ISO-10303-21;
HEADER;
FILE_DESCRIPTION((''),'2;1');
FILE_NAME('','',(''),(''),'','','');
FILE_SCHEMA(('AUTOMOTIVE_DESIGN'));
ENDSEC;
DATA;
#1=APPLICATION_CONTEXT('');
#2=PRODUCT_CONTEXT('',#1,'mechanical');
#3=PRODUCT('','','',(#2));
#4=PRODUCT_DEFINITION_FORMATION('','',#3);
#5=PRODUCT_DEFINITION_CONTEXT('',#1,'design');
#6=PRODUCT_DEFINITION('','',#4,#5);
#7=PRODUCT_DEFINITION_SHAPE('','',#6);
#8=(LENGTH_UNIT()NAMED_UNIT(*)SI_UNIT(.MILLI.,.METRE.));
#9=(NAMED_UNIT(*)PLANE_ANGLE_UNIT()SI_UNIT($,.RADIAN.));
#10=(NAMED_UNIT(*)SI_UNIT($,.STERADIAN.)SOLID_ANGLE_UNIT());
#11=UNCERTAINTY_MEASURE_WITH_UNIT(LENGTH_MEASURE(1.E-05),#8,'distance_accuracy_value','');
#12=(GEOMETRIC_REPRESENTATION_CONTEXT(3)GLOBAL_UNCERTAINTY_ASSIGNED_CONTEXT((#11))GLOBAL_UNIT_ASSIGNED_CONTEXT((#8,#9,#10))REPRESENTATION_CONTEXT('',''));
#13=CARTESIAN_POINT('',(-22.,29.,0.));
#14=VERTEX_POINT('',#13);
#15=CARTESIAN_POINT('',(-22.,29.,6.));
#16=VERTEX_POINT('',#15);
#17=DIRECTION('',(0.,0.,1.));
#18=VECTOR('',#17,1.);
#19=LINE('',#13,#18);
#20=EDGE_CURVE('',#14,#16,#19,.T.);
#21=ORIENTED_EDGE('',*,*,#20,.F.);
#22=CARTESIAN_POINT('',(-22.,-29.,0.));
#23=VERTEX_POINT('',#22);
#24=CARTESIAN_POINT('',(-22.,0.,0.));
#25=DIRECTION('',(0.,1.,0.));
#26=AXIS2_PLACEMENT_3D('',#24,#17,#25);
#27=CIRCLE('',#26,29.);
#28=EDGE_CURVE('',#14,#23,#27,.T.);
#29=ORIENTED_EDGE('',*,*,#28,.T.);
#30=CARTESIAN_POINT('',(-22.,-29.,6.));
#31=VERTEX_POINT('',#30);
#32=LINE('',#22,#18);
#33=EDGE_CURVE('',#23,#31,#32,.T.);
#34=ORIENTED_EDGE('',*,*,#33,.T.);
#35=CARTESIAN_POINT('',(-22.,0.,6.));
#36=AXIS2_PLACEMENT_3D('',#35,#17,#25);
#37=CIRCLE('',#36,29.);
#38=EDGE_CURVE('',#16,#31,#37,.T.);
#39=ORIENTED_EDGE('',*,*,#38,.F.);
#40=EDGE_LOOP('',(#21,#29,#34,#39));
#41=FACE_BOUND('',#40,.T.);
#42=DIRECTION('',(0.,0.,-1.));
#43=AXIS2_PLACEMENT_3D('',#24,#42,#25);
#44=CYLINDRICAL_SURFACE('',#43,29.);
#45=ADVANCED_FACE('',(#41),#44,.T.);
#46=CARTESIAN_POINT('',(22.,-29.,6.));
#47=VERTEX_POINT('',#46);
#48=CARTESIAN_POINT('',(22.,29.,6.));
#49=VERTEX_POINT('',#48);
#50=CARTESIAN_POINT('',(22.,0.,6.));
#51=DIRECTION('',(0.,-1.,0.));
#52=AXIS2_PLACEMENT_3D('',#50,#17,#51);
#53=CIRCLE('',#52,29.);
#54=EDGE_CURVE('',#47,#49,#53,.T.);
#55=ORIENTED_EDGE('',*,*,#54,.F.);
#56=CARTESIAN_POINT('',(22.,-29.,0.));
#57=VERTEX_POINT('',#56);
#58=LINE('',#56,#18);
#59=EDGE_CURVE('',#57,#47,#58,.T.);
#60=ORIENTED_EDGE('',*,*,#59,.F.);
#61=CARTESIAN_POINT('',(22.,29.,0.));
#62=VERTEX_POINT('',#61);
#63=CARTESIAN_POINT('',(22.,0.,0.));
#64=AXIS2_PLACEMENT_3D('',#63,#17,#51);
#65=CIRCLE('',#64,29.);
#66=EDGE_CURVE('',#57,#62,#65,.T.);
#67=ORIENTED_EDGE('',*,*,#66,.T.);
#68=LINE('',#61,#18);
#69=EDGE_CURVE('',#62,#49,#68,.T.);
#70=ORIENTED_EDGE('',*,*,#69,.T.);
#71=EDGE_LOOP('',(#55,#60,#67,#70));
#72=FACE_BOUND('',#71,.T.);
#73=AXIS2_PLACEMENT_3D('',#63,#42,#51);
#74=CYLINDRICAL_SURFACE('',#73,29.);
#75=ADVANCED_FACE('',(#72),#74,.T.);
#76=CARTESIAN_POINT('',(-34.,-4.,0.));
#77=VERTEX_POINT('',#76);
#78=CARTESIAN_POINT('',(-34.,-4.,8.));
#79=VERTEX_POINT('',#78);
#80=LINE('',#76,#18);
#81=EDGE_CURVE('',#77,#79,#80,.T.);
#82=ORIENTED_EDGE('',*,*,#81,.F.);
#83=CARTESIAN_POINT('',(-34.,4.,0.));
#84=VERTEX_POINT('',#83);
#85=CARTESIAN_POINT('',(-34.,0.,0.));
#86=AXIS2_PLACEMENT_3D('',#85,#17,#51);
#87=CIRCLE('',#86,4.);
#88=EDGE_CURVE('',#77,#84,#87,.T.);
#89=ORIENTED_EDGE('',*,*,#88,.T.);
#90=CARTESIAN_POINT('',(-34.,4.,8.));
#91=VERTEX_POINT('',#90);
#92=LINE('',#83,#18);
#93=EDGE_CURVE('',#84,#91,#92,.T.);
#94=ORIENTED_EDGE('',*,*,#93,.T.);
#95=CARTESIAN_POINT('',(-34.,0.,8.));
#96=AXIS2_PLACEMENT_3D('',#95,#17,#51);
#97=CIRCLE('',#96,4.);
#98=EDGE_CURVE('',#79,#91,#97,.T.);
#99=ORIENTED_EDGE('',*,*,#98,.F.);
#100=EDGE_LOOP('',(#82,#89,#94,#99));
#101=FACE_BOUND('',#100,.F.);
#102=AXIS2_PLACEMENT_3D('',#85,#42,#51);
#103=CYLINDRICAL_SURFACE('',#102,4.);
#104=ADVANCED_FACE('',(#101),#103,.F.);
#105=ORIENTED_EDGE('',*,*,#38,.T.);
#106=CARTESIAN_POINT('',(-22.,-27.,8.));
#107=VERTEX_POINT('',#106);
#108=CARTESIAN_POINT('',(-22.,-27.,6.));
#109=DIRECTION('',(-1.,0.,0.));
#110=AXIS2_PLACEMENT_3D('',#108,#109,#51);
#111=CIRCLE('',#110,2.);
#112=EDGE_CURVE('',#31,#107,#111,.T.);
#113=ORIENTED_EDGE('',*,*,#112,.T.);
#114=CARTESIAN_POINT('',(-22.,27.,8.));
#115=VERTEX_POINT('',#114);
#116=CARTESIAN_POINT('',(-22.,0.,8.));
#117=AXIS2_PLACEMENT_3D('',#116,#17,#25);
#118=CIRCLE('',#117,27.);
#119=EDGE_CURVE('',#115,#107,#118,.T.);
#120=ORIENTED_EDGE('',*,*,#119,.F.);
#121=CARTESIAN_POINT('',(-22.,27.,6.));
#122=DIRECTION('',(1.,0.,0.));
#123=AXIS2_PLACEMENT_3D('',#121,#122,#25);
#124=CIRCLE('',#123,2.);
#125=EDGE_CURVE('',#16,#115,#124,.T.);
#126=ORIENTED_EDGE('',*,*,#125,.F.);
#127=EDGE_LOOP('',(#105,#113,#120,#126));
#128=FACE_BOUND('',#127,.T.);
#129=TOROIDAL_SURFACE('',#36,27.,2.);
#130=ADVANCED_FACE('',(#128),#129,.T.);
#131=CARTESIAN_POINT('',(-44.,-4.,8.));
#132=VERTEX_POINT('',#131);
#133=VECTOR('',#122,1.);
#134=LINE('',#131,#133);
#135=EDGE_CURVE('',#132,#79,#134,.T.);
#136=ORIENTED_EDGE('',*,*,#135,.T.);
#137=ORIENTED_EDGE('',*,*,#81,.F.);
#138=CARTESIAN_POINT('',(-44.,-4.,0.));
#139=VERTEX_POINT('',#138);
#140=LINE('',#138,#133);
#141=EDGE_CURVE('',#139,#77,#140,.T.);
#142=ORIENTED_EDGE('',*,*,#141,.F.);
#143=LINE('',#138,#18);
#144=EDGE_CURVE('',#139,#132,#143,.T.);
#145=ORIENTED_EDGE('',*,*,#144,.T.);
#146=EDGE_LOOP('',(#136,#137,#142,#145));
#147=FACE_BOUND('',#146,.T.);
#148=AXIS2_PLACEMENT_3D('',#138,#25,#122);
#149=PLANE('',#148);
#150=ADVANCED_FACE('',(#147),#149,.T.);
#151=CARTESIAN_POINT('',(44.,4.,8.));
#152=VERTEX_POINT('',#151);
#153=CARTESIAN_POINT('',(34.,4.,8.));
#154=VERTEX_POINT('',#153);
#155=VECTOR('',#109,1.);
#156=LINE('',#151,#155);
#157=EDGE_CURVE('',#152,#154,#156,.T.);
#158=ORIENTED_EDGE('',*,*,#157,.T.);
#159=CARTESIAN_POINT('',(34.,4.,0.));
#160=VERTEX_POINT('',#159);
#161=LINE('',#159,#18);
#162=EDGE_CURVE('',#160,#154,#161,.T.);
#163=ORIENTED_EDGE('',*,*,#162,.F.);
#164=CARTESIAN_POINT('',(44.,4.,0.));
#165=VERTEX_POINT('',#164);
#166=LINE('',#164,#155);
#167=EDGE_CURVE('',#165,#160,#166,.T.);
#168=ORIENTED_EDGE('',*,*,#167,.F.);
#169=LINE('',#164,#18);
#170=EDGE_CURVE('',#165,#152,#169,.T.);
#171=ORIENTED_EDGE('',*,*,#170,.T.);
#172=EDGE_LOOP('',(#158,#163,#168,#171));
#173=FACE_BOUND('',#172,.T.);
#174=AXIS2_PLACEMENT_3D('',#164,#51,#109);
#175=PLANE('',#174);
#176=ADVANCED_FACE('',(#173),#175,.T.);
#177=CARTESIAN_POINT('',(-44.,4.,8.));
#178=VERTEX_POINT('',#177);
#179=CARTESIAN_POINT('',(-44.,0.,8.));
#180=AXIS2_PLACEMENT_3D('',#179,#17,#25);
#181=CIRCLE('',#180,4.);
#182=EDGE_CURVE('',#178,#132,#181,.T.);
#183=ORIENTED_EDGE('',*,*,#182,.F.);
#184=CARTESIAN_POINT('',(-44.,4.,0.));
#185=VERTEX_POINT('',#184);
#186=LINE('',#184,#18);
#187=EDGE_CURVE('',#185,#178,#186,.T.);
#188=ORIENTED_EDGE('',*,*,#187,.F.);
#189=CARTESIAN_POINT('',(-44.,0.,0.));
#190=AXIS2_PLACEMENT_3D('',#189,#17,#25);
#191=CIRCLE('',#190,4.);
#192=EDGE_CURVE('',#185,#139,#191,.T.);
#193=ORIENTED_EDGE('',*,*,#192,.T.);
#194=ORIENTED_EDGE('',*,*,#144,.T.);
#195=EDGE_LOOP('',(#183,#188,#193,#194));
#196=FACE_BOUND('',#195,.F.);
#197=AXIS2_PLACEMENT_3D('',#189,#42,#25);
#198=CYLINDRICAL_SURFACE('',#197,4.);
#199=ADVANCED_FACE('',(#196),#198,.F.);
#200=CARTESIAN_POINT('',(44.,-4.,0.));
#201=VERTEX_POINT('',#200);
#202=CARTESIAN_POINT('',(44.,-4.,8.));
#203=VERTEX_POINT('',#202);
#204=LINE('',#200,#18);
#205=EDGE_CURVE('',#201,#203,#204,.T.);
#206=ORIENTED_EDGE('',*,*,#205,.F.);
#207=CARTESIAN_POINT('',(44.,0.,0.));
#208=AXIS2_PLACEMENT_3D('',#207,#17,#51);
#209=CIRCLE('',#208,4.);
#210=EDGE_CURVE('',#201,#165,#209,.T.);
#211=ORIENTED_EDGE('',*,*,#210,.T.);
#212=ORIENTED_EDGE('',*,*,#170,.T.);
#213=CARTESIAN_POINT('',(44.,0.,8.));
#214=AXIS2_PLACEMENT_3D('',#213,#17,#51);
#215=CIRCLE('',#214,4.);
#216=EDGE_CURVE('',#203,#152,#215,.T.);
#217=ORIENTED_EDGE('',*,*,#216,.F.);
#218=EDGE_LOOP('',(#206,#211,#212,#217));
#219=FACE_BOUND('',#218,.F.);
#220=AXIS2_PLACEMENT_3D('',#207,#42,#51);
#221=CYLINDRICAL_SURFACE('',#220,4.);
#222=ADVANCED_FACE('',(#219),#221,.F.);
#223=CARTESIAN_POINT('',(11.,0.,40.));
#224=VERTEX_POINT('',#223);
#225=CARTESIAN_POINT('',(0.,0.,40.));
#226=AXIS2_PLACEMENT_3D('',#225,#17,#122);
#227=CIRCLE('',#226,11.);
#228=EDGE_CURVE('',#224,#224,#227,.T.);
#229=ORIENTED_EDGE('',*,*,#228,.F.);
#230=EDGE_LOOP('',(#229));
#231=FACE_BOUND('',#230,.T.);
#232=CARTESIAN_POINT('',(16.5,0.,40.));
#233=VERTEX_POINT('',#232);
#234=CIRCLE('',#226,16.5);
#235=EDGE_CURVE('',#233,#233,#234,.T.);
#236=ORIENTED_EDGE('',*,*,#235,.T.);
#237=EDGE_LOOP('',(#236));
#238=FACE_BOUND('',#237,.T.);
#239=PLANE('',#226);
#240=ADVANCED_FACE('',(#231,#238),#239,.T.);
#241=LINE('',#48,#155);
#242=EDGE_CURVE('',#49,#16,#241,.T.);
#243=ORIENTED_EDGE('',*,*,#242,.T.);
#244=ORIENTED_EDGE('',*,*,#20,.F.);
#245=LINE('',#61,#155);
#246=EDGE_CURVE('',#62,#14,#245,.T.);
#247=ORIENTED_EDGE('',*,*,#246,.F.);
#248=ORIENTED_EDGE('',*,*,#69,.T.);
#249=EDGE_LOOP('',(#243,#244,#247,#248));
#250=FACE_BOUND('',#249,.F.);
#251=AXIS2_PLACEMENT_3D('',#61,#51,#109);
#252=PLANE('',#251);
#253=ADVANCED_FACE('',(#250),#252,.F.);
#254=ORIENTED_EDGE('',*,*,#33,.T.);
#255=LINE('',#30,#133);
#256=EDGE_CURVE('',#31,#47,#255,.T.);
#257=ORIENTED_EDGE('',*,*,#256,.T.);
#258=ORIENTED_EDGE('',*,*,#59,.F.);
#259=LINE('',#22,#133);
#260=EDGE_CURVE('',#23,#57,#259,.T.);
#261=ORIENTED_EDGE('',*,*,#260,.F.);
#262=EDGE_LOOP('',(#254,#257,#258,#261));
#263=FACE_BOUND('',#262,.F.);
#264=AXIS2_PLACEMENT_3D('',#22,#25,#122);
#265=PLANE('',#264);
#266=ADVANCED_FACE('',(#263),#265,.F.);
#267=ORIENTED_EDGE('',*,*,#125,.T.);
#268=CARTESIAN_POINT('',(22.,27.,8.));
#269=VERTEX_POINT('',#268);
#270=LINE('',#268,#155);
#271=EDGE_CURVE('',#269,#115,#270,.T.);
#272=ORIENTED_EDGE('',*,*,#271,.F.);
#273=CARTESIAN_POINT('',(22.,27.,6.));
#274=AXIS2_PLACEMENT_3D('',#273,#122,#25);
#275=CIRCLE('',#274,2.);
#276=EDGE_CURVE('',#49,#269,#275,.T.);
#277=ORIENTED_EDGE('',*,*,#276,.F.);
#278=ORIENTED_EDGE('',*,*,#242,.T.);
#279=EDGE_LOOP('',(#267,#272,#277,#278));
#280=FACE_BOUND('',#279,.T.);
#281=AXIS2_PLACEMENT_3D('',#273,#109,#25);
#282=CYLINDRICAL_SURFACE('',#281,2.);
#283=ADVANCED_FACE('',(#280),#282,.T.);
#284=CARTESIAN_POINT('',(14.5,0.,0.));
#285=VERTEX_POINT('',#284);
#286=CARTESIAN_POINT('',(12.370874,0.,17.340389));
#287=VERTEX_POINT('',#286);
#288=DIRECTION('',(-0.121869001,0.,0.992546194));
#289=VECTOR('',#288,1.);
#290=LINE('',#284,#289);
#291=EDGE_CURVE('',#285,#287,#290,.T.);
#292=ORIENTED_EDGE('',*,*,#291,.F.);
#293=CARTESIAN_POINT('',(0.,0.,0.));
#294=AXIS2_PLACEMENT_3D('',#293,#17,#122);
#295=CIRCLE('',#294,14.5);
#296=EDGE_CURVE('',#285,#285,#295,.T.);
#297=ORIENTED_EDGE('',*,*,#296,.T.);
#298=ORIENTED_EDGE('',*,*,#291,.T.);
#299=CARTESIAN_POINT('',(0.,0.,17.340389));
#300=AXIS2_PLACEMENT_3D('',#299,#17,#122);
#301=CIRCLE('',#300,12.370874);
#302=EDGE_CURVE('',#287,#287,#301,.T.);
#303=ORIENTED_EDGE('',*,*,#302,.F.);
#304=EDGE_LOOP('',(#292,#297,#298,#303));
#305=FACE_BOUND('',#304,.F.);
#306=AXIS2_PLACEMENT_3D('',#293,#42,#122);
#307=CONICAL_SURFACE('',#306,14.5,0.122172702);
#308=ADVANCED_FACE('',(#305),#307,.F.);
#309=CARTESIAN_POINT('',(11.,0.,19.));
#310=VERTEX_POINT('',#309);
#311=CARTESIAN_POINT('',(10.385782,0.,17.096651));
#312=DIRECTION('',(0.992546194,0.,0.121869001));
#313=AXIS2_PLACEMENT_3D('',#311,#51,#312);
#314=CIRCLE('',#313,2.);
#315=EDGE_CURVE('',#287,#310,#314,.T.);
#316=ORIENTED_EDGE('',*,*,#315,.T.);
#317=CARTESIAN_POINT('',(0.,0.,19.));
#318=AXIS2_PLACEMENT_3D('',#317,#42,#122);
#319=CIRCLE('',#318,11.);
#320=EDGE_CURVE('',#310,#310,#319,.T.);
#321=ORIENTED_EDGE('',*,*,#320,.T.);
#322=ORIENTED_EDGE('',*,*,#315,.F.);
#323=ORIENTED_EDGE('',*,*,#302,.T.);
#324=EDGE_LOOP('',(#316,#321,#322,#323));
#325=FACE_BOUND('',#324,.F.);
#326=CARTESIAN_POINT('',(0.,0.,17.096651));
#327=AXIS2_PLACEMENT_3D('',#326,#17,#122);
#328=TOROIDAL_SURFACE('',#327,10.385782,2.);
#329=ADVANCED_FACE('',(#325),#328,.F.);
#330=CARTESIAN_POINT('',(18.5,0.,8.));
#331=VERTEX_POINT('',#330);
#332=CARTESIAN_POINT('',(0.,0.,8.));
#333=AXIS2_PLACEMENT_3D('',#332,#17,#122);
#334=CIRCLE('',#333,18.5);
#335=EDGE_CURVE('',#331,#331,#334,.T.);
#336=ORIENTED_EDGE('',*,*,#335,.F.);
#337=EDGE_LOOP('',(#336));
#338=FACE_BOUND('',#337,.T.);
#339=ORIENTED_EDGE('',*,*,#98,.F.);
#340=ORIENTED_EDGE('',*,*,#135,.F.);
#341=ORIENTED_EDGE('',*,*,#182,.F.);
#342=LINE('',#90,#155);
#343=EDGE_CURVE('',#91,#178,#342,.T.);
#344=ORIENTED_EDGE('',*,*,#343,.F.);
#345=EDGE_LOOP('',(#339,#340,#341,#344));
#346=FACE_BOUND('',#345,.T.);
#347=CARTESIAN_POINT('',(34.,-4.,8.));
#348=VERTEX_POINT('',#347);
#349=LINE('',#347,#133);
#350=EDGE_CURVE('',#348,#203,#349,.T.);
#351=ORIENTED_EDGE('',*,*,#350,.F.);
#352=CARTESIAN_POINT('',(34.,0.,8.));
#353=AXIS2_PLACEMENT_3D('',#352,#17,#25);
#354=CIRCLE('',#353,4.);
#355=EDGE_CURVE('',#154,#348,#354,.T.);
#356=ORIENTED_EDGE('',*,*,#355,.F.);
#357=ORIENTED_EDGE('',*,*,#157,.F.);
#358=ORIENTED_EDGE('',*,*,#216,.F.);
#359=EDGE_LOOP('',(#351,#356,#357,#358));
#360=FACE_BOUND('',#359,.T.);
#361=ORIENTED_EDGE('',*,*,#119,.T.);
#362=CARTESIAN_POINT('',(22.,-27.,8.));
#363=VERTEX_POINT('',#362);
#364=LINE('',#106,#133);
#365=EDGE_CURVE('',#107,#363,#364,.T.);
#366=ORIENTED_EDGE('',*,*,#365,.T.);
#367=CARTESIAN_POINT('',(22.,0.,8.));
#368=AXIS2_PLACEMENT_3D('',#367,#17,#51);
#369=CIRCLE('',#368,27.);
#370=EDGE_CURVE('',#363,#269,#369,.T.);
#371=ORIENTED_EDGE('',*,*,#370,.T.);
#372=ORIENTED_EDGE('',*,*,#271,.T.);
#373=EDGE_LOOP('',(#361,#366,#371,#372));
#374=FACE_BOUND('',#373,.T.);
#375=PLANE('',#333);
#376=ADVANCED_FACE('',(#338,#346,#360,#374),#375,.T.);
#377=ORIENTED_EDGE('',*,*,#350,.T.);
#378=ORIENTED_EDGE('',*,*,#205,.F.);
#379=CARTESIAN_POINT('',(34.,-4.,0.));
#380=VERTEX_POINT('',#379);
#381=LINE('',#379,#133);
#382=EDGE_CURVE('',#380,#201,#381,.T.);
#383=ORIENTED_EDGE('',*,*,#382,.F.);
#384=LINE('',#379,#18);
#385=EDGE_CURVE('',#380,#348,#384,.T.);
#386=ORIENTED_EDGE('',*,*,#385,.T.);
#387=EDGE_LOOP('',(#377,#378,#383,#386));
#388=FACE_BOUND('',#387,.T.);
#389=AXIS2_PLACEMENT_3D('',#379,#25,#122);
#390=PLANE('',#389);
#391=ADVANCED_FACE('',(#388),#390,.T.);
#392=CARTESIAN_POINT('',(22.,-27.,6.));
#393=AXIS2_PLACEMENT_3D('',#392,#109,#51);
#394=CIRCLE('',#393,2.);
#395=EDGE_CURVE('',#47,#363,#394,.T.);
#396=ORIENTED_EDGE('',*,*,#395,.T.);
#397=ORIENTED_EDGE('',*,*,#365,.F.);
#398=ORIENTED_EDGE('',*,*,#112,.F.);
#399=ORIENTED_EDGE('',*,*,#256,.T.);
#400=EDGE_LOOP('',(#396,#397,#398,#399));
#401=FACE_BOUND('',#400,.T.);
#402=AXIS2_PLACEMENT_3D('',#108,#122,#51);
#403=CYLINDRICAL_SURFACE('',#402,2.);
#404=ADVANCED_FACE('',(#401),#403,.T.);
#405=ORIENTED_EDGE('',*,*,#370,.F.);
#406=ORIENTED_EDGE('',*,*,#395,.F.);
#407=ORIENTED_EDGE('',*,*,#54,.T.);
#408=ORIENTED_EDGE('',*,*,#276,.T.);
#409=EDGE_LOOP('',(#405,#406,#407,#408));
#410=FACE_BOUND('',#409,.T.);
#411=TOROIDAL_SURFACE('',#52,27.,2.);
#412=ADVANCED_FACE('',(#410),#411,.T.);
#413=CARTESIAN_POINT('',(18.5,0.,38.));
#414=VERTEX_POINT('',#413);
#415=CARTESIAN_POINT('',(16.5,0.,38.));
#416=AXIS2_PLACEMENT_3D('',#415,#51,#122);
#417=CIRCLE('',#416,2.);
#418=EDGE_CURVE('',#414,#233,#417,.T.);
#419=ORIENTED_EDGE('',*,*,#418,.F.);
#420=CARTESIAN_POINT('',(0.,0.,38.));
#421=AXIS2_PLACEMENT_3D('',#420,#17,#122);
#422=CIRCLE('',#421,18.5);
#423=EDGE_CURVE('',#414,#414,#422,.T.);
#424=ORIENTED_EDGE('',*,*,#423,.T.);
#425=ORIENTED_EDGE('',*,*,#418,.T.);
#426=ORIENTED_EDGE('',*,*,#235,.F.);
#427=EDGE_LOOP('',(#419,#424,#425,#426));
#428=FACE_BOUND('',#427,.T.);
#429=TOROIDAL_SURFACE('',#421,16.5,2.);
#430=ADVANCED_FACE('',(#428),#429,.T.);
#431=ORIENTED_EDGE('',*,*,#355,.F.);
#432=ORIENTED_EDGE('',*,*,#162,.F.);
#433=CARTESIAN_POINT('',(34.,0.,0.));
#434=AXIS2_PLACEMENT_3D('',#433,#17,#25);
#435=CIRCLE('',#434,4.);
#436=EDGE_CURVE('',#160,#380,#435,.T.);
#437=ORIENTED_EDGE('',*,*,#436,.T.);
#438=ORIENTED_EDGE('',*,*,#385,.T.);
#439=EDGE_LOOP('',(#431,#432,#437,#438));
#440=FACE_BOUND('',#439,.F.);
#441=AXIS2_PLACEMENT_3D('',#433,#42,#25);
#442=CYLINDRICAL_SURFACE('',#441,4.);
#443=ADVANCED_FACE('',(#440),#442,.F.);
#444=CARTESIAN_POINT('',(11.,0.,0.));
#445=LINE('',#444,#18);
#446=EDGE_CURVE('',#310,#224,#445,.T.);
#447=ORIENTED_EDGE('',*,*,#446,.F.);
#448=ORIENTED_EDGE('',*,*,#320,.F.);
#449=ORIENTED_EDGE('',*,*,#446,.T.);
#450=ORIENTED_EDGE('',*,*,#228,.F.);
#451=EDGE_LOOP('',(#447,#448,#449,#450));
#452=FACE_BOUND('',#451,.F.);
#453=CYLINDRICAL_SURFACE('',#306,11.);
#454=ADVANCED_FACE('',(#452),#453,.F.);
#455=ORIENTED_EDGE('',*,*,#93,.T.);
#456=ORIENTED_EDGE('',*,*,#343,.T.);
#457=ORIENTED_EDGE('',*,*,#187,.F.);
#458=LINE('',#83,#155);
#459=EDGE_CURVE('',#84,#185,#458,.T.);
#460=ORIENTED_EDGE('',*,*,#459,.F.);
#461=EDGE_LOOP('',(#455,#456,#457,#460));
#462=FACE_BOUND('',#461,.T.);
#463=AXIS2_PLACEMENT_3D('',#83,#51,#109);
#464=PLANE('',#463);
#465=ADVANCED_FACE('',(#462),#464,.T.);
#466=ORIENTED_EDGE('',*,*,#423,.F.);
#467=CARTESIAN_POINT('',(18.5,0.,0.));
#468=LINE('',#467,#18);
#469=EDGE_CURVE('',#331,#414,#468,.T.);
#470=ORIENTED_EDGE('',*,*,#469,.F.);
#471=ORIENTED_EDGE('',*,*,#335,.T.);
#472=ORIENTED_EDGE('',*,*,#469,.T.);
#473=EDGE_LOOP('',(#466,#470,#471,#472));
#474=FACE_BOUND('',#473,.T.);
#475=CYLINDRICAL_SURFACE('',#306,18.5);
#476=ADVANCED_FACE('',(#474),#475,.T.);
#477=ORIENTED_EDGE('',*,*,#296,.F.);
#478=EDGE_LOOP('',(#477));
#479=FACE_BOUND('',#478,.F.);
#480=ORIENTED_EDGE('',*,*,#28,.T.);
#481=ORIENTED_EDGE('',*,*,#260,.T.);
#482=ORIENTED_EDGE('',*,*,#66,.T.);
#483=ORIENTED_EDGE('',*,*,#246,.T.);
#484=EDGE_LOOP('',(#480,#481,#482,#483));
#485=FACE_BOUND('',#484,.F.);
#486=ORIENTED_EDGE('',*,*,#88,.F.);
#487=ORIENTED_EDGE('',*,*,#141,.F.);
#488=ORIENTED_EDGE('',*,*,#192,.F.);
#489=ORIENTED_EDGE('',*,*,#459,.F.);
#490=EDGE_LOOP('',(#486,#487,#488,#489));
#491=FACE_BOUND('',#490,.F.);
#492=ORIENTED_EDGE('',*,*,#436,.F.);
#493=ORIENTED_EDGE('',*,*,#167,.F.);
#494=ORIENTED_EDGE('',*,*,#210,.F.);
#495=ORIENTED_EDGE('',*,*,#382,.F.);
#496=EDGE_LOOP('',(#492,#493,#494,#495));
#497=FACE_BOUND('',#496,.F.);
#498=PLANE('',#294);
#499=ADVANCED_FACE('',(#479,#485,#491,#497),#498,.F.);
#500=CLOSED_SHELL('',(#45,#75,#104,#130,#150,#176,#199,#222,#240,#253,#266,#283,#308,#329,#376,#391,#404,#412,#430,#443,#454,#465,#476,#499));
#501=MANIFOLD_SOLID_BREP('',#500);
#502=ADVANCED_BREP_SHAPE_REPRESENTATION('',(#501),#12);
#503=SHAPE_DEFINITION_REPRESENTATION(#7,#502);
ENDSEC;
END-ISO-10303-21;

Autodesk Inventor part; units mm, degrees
ref_plane "YZ Plane" through (0, 0, 0) normal (1, 0, 0) x (0, 1, 0)
ref_plane "XZ Plane" through (0, 0, 0) normal (0, 1, 0) x (-1, 0, 0)
sketch "스케치1" plane through (0, 0, 0) normal (0, 0, 1) x (1, 0, 0)
  line L0 (-22, 0) -> (22, 0) construction
  line L1 (-22, -29) -> (22, -29)
  line L2 (22, 29) -> (-22, 29)
  arc A0 (-22, 29) -> (-22, -29) centre (-22, 0) ccw
  arc A1 (22, -29) -> (22, 29) centre (22, 0) ccw
  line L3 (-44, 0) -> (-34, 0) construction
  line L4 (-44, -4) -> (-34, -4)
  line L5 (-34, 4) -> (-44, 4)
  arc A2 (-44, 4) -> (-44, -4) centre (-44, 0) ccw
  arc A3 (-34, -4) -> (-34, 4) centre (-34, 0) ccw
  line L6 (44, 0) -> (34, 0) construction
  line L7 (44, 4) -> (34, 4)
  line L8 (34, -4) -> (44, -4)
  arc A4 (44, -4) -> (44, 4) centre (44, 0) ccw
  arc A5 (34, 4) -> (34, -4) centre (34, 0) ccw
  circle A6 centre (0, 0) radius 18.5
  circle A7 centre (0, 0) radius 11
  point P0 (-39, 0)
  point P1 (39, 0)
  dimension "d0" = 29
  dimension "d1" = 102
  dimension "d2" = 10
  dimension "d3" = 8
  dimension "d4" = 10
  dimension "d5" = 8
  dimension "d6" = 68
  dimension "d7" = 34
  dimension "d8" = 37
  dimension "d9" = 22
extrude "돌출1" add sketch "스케치1" along normal blind 8 contours A0 L2 A1 L1
extrude "돌출2" add sketch "스케치1" along normal blind 40 contours A6
ref_plane "작업 평면1" through (-22, 0, 0) normal (0, 1, 0) x (1, 0, 0)
sketch "스케치2" plane through (-22, 0, 0) normal (0, 1, 0) x (1, 0, 0)
  line L0 (36.5, 0) -> (34.1671, -19)
  line L1 (34.1671, -19) -> (9.8329, -19)
  line L2 (33, -40) -> (33, 0) projected
  line L3 (9.8329, -19) -> (7.5, 0)
  line L4 (85.0441, 0) -> (-77.2032, 0)
  line L5 (22, 10.7301) -> (22, -88.2666)
  point P0 (22, 0)
  point P1 (22, 0)
  point P2 (22, 0)
  point P3 (22, -19)
  dimension "d14" = 14
  dimension "d16" = 29
  dimension "d17" = 19
  dimension "d18" = 19
  dimension "d19" = 0
  dimension "d20" = 0
  dimension "d21" = 14.5
revolve "회전1" cut sketch "스케치2" angle 360 about axis through (0, 0, -10.7301) along (0, 0, 1) contours L0 L1 L2 L4 | L2 L1 L5 L4
fillet "모깎기1" radius 2 1 edges at (-12.1671, 0, 19)
fillet "모깎기2" radius 2 5 edges at (-18.5, 0, 40) (0, -29, 8) (51, 0, 8) (0, 29, 8) (-51, 0, 8)
properties part number "부품1"
